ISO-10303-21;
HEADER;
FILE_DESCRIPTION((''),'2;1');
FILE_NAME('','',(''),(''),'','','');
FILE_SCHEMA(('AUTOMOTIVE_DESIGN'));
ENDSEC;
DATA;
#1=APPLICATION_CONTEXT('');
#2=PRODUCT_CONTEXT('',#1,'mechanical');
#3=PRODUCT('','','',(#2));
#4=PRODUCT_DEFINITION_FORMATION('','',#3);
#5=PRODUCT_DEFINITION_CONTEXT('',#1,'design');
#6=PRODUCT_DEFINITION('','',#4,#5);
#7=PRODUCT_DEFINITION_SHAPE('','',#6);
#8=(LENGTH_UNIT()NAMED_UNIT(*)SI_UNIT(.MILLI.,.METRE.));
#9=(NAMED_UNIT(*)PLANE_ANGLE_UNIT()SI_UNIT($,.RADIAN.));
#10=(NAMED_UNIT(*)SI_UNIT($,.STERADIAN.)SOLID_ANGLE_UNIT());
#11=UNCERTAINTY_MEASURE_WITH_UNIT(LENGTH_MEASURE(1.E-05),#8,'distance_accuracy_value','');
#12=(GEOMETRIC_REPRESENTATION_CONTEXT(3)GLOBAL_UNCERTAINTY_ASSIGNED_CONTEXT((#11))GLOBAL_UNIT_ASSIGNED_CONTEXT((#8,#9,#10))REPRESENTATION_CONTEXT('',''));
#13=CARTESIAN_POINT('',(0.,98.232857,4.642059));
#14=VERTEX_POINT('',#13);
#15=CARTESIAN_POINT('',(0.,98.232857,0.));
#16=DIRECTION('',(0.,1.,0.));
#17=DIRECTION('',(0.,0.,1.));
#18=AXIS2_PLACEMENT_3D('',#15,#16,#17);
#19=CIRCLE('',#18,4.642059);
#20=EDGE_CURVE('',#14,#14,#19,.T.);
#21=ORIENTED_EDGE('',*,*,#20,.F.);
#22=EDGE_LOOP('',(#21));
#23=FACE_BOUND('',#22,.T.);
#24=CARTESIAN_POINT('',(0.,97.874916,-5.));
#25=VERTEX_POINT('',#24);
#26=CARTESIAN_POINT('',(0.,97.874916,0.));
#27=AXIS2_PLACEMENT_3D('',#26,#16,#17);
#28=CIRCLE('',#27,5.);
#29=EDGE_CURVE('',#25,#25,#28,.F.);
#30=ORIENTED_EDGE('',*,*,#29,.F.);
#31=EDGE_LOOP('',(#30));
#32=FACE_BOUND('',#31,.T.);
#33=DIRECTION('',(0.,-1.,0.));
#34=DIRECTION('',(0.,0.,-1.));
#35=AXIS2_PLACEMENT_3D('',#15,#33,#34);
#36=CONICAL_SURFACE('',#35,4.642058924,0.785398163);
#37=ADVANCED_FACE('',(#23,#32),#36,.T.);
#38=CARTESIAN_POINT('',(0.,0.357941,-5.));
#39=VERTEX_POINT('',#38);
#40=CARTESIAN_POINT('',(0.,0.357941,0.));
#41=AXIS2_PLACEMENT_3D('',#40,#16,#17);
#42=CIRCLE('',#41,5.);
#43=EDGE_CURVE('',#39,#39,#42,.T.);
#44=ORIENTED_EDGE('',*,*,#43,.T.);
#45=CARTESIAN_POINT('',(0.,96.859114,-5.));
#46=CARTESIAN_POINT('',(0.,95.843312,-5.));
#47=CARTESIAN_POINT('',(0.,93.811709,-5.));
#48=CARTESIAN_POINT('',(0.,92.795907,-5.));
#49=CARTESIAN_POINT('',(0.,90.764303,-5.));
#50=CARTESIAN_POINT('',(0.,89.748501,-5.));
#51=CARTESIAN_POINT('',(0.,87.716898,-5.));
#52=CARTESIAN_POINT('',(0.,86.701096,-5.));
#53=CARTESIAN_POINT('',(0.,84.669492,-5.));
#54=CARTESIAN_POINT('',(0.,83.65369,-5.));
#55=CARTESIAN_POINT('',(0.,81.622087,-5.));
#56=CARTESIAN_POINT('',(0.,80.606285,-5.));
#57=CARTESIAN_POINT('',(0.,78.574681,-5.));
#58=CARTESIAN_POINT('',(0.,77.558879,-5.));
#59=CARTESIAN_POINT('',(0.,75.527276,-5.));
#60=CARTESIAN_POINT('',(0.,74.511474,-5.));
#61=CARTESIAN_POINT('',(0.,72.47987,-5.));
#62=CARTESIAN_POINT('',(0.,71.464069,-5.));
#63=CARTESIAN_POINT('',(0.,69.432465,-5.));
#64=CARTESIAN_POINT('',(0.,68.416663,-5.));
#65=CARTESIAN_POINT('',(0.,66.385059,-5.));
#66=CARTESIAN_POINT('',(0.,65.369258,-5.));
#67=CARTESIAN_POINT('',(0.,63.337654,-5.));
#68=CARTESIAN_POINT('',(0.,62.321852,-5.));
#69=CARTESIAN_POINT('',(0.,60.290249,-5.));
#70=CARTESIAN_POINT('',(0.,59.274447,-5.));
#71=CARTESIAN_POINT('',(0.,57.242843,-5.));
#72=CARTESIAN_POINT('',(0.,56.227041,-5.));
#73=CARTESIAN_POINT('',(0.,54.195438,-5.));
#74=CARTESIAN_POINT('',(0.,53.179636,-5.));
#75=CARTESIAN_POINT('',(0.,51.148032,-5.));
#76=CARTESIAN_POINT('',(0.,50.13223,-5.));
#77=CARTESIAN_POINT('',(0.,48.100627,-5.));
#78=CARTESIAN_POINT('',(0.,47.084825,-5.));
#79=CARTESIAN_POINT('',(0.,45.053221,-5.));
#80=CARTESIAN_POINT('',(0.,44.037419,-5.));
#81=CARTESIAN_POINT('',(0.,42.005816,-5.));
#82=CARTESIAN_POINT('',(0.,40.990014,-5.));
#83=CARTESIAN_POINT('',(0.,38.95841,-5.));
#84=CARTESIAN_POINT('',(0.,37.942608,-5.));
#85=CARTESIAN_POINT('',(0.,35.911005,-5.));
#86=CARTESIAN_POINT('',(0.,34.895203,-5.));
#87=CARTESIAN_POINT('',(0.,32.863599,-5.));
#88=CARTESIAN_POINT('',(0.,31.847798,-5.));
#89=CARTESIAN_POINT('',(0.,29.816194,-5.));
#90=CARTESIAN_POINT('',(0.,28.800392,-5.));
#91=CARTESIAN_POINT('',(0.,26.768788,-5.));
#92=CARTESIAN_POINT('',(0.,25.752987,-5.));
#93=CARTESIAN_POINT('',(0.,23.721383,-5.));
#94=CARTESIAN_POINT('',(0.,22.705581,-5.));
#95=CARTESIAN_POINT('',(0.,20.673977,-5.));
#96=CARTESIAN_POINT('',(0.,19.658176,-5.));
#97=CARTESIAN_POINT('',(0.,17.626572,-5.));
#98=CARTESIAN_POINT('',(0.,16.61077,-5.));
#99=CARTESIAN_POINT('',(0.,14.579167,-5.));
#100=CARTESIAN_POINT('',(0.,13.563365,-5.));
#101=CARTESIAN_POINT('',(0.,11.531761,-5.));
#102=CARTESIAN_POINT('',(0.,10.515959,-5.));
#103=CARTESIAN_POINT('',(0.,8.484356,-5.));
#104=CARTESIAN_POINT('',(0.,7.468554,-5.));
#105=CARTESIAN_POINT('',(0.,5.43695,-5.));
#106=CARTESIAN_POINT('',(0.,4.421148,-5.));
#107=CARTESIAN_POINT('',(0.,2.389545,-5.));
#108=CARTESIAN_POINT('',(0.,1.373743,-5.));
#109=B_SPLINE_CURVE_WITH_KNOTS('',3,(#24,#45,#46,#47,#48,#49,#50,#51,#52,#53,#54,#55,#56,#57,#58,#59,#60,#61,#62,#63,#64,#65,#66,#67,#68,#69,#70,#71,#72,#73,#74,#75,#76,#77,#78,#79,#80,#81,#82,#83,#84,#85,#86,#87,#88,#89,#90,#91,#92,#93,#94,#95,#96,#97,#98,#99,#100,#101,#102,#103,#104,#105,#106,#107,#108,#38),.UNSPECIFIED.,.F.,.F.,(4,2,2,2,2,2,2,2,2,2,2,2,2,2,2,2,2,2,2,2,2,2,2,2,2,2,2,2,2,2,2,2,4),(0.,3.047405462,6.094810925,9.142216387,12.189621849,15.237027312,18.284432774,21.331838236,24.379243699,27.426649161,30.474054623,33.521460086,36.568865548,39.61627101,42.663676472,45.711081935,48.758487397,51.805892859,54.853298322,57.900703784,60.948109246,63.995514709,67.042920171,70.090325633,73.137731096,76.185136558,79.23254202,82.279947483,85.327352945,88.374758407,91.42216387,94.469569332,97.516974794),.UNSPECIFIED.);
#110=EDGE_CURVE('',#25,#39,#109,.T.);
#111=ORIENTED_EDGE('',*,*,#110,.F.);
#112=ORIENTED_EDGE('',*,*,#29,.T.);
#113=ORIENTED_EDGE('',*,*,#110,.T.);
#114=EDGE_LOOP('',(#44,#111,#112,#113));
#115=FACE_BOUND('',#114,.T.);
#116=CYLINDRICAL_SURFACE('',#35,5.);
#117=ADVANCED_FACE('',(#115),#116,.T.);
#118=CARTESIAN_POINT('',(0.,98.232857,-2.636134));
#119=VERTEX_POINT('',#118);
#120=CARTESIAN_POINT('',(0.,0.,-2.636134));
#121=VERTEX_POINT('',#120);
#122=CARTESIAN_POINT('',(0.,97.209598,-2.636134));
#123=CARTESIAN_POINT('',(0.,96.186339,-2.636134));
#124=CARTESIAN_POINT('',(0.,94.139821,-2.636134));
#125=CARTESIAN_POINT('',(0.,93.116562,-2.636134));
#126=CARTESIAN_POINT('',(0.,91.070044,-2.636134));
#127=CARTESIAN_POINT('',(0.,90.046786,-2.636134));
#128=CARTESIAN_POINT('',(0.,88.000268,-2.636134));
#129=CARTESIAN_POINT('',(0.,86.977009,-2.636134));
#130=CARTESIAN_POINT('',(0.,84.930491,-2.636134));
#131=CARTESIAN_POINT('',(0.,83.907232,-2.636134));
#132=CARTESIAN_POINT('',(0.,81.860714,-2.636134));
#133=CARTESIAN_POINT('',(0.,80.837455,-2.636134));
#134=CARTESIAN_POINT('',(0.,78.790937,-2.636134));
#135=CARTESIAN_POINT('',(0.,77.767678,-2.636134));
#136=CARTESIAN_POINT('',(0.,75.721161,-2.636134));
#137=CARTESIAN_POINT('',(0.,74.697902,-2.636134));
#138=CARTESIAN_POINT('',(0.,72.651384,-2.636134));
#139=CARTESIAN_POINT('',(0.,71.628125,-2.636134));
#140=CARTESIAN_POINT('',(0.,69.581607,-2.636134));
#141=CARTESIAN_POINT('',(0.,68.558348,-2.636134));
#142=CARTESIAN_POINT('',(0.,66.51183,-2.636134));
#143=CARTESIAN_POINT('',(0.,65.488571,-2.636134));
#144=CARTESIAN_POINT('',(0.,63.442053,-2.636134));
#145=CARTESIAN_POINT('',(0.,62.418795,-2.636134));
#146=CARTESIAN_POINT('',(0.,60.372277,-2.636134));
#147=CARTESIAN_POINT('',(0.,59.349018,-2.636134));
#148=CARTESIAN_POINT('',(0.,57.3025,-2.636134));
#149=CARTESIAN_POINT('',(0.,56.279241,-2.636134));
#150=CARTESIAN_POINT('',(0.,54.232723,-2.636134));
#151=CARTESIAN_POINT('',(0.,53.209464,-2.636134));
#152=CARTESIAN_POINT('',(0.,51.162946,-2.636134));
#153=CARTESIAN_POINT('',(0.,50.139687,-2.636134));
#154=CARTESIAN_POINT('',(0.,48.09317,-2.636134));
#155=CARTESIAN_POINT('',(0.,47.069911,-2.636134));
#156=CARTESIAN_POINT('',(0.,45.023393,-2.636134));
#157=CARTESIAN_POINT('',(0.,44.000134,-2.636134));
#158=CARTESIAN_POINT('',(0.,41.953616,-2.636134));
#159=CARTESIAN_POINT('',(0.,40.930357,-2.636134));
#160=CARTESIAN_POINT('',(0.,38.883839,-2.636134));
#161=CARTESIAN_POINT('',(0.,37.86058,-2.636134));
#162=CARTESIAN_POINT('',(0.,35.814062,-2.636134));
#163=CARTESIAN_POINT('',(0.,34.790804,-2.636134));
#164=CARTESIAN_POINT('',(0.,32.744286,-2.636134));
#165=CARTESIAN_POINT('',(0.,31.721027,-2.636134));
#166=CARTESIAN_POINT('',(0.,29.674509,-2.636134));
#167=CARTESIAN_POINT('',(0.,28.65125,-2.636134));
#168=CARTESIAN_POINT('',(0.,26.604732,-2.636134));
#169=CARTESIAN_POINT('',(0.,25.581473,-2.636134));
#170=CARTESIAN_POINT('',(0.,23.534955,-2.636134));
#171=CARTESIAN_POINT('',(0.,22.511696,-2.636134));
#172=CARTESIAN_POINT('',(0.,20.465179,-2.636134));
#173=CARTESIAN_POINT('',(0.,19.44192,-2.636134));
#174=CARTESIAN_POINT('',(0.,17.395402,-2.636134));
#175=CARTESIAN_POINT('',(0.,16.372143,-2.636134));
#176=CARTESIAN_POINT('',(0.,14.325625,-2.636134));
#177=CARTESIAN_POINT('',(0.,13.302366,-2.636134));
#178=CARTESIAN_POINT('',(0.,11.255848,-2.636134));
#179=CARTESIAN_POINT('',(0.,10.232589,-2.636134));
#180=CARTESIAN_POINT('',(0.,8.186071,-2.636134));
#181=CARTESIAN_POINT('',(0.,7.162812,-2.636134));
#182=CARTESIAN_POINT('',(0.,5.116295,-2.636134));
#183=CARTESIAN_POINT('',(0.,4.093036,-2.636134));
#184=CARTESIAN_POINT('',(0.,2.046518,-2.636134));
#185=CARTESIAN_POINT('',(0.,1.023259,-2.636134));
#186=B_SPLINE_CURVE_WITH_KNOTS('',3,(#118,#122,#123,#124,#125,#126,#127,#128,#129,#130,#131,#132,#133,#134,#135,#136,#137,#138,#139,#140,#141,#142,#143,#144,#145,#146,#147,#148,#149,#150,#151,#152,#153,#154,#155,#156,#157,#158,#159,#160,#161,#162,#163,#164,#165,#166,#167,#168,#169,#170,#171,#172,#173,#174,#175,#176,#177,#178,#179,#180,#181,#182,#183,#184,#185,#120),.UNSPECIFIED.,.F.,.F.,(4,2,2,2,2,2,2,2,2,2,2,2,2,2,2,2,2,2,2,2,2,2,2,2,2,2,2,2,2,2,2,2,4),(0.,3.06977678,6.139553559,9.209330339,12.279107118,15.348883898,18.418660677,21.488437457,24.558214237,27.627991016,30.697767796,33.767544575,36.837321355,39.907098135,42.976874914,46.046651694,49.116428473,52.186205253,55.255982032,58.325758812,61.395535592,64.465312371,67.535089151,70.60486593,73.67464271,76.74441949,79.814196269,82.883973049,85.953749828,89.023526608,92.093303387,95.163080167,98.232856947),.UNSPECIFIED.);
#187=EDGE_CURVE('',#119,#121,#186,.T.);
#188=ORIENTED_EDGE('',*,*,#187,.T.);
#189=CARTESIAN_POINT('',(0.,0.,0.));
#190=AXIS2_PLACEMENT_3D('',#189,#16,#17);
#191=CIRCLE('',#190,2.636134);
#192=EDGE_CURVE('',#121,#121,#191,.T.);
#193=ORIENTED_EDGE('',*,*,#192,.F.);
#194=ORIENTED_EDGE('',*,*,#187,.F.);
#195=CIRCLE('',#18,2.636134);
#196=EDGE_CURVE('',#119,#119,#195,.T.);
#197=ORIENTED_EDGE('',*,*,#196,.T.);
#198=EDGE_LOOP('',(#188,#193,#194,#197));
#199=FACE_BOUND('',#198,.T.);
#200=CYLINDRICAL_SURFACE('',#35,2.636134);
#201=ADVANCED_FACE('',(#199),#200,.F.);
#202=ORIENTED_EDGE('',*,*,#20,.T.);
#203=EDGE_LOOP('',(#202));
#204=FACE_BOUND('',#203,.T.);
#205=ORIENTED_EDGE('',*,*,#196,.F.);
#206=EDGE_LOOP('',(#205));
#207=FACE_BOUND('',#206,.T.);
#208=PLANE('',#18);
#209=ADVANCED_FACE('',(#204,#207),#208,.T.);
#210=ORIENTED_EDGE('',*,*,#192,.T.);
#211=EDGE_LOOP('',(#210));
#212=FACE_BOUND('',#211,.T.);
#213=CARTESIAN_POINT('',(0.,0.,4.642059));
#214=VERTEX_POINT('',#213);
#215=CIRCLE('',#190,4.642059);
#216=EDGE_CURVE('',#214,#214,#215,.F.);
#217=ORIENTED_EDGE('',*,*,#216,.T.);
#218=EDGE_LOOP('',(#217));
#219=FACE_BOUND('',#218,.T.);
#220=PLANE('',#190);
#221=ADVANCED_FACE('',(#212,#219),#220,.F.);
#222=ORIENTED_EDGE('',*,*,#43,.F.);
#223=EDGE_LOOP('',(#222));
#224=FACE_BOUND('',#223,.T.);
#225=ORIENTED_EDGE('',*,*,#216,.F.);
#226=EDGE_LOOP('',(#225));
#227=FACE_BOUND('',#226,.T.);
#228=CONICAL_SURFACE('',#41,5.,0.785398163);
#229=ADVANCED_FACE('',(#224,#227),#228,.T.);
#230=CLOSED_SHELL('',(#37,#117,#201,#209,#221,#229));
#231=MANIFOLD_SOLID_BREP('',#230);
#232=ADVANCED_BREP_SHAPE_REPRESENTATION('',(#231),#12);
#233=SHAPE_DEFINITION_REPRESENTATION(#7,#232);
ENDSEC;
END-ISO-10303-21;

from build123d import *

# Parameters (mm, degrees)
SKETCH1_R           = 5
BOSS_EXTRUDE1_DEPTH = 98.232856947
SKETCH2_R           = 2.636133781
CUT_EXTRUDE1_DEPTH  = 99.48702546
CHAMFER1_SIZE       = 0.357941076


with BuildPart() as part:
    # Sketch1 → Boss-Extrude1 (new body)
    with BuildSketch(Plane(origin=(0, 0, 0), x_dir=(1, 0, 0), z_dir=(0, 1, 0))):
        Circle(SKETCH1_R)
    extrude(amount=BOSS_EXTRUDE1_DEPTH)

    # Sketch2 → Cut-Extrude1 (cut, through all)
    with BuildSketch(Plane(origin=(0, 0, 0), x_dir=(1, 0, 0), z_dir=(0, 1, 0))):
        Circle(SKETCH2_R)
    extrude(amount=CUT_EXTRUDE1_DEPTH, mode=Mode.SUBTRACT)

    # Chamfer1
    chamfer1_edges = [part.edges().sort_by_distance(p)[0] for p in [
        (-5, 98.232856947, 0),
        (-5, 0, 0),
    ]]
    chamfer(chamfer1_edges, length=CHAMFER1_SIZE)


solid = part.part
